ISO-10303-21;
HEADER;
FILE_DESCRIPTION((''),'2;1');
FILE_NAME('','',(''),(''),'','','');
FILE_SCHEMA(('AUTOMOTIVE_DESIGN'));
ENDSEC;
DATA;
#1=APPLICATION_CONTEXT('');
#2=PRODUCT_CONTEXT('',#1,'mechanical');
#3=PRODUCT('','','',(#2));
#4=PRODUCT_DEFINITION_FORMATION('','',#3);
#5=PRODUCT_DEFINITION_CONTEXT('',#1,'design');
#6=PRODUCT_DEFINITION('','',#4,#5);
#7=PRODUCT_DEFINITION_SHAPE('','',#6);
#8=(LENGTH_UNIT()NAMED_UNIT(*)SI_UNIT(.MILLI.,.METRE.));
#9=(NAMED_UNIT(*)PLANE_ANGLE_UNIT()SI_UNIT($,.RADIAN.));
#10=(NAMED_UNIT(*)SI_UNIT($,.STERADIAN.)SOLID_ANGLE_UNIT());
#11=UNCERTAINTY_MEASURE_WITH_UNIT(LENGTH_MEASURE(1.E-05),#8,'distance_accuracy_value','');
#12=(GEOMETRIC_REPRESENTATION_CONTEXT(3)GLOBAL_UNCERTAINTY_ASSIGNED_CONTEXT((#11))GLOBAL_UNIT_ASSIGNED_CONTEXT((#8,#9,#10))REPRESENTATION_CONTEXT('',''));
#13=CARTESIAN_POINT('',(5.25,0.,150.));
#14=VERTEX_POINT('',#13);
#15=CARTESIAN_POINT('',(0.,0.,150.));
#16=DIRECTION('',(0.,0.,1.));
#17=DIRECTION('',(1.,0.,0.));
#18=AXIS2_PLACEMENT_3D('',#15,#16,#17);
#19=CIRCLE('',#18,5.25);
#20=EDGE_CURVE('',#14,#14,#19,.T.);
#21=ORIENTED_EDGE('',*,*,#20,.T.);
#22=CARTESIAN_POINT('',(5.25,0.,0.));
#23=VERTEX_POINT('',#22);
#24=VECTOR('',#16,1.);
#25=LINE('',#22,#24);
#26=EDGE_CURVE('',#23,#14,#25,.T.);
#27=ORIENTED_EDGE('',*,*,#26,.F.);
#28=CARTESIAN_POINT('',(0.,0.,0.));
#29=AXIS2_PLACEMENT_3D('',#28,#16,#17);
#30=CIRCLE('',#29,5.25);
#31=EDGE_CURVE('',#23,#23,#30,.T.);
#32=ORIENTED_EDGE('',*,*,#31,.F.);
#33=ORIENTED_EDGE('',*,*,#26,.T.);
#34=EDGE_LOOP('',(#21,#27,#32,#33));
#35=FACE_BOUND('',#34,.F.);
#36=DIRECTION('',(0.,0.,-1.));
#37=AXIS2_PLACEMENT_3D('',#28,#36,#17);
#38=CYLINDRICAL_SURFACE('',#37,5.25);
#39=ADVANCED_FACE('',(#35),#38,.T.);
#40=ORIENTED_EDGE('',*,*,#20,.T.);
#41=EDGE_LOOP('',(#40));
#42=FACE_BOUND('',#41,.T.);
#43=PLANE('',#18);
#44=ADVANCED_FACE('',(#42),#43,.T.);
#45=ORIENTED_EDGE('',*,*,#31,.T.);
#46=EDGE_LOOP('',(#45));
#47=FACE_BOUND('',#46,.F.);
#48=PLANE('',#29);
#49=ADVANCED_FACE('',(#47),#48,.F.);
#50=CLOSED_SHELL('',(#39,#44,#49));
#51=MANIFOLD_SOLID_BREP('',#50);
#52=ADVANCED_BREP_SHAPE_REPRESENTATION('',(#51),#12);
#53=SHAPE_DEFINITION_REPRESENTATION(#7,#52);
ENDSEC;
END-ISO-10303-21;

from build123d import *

# Parameters (mm, degrees)
F0_R     = 5.25
F1_DEPTH = 150


# Not quite as in the source:
# - a feature of the source that left no trace in its solid (it failed there, or was rolled back) is left out


with BuildPart() as f1:
    # F0 (on Top) → F1 (new body)
    with BuildSketch(Plane.XY):
        Circle(F0_R)
    extrude(amount=F1_DEPTH)


solid = f1.part
